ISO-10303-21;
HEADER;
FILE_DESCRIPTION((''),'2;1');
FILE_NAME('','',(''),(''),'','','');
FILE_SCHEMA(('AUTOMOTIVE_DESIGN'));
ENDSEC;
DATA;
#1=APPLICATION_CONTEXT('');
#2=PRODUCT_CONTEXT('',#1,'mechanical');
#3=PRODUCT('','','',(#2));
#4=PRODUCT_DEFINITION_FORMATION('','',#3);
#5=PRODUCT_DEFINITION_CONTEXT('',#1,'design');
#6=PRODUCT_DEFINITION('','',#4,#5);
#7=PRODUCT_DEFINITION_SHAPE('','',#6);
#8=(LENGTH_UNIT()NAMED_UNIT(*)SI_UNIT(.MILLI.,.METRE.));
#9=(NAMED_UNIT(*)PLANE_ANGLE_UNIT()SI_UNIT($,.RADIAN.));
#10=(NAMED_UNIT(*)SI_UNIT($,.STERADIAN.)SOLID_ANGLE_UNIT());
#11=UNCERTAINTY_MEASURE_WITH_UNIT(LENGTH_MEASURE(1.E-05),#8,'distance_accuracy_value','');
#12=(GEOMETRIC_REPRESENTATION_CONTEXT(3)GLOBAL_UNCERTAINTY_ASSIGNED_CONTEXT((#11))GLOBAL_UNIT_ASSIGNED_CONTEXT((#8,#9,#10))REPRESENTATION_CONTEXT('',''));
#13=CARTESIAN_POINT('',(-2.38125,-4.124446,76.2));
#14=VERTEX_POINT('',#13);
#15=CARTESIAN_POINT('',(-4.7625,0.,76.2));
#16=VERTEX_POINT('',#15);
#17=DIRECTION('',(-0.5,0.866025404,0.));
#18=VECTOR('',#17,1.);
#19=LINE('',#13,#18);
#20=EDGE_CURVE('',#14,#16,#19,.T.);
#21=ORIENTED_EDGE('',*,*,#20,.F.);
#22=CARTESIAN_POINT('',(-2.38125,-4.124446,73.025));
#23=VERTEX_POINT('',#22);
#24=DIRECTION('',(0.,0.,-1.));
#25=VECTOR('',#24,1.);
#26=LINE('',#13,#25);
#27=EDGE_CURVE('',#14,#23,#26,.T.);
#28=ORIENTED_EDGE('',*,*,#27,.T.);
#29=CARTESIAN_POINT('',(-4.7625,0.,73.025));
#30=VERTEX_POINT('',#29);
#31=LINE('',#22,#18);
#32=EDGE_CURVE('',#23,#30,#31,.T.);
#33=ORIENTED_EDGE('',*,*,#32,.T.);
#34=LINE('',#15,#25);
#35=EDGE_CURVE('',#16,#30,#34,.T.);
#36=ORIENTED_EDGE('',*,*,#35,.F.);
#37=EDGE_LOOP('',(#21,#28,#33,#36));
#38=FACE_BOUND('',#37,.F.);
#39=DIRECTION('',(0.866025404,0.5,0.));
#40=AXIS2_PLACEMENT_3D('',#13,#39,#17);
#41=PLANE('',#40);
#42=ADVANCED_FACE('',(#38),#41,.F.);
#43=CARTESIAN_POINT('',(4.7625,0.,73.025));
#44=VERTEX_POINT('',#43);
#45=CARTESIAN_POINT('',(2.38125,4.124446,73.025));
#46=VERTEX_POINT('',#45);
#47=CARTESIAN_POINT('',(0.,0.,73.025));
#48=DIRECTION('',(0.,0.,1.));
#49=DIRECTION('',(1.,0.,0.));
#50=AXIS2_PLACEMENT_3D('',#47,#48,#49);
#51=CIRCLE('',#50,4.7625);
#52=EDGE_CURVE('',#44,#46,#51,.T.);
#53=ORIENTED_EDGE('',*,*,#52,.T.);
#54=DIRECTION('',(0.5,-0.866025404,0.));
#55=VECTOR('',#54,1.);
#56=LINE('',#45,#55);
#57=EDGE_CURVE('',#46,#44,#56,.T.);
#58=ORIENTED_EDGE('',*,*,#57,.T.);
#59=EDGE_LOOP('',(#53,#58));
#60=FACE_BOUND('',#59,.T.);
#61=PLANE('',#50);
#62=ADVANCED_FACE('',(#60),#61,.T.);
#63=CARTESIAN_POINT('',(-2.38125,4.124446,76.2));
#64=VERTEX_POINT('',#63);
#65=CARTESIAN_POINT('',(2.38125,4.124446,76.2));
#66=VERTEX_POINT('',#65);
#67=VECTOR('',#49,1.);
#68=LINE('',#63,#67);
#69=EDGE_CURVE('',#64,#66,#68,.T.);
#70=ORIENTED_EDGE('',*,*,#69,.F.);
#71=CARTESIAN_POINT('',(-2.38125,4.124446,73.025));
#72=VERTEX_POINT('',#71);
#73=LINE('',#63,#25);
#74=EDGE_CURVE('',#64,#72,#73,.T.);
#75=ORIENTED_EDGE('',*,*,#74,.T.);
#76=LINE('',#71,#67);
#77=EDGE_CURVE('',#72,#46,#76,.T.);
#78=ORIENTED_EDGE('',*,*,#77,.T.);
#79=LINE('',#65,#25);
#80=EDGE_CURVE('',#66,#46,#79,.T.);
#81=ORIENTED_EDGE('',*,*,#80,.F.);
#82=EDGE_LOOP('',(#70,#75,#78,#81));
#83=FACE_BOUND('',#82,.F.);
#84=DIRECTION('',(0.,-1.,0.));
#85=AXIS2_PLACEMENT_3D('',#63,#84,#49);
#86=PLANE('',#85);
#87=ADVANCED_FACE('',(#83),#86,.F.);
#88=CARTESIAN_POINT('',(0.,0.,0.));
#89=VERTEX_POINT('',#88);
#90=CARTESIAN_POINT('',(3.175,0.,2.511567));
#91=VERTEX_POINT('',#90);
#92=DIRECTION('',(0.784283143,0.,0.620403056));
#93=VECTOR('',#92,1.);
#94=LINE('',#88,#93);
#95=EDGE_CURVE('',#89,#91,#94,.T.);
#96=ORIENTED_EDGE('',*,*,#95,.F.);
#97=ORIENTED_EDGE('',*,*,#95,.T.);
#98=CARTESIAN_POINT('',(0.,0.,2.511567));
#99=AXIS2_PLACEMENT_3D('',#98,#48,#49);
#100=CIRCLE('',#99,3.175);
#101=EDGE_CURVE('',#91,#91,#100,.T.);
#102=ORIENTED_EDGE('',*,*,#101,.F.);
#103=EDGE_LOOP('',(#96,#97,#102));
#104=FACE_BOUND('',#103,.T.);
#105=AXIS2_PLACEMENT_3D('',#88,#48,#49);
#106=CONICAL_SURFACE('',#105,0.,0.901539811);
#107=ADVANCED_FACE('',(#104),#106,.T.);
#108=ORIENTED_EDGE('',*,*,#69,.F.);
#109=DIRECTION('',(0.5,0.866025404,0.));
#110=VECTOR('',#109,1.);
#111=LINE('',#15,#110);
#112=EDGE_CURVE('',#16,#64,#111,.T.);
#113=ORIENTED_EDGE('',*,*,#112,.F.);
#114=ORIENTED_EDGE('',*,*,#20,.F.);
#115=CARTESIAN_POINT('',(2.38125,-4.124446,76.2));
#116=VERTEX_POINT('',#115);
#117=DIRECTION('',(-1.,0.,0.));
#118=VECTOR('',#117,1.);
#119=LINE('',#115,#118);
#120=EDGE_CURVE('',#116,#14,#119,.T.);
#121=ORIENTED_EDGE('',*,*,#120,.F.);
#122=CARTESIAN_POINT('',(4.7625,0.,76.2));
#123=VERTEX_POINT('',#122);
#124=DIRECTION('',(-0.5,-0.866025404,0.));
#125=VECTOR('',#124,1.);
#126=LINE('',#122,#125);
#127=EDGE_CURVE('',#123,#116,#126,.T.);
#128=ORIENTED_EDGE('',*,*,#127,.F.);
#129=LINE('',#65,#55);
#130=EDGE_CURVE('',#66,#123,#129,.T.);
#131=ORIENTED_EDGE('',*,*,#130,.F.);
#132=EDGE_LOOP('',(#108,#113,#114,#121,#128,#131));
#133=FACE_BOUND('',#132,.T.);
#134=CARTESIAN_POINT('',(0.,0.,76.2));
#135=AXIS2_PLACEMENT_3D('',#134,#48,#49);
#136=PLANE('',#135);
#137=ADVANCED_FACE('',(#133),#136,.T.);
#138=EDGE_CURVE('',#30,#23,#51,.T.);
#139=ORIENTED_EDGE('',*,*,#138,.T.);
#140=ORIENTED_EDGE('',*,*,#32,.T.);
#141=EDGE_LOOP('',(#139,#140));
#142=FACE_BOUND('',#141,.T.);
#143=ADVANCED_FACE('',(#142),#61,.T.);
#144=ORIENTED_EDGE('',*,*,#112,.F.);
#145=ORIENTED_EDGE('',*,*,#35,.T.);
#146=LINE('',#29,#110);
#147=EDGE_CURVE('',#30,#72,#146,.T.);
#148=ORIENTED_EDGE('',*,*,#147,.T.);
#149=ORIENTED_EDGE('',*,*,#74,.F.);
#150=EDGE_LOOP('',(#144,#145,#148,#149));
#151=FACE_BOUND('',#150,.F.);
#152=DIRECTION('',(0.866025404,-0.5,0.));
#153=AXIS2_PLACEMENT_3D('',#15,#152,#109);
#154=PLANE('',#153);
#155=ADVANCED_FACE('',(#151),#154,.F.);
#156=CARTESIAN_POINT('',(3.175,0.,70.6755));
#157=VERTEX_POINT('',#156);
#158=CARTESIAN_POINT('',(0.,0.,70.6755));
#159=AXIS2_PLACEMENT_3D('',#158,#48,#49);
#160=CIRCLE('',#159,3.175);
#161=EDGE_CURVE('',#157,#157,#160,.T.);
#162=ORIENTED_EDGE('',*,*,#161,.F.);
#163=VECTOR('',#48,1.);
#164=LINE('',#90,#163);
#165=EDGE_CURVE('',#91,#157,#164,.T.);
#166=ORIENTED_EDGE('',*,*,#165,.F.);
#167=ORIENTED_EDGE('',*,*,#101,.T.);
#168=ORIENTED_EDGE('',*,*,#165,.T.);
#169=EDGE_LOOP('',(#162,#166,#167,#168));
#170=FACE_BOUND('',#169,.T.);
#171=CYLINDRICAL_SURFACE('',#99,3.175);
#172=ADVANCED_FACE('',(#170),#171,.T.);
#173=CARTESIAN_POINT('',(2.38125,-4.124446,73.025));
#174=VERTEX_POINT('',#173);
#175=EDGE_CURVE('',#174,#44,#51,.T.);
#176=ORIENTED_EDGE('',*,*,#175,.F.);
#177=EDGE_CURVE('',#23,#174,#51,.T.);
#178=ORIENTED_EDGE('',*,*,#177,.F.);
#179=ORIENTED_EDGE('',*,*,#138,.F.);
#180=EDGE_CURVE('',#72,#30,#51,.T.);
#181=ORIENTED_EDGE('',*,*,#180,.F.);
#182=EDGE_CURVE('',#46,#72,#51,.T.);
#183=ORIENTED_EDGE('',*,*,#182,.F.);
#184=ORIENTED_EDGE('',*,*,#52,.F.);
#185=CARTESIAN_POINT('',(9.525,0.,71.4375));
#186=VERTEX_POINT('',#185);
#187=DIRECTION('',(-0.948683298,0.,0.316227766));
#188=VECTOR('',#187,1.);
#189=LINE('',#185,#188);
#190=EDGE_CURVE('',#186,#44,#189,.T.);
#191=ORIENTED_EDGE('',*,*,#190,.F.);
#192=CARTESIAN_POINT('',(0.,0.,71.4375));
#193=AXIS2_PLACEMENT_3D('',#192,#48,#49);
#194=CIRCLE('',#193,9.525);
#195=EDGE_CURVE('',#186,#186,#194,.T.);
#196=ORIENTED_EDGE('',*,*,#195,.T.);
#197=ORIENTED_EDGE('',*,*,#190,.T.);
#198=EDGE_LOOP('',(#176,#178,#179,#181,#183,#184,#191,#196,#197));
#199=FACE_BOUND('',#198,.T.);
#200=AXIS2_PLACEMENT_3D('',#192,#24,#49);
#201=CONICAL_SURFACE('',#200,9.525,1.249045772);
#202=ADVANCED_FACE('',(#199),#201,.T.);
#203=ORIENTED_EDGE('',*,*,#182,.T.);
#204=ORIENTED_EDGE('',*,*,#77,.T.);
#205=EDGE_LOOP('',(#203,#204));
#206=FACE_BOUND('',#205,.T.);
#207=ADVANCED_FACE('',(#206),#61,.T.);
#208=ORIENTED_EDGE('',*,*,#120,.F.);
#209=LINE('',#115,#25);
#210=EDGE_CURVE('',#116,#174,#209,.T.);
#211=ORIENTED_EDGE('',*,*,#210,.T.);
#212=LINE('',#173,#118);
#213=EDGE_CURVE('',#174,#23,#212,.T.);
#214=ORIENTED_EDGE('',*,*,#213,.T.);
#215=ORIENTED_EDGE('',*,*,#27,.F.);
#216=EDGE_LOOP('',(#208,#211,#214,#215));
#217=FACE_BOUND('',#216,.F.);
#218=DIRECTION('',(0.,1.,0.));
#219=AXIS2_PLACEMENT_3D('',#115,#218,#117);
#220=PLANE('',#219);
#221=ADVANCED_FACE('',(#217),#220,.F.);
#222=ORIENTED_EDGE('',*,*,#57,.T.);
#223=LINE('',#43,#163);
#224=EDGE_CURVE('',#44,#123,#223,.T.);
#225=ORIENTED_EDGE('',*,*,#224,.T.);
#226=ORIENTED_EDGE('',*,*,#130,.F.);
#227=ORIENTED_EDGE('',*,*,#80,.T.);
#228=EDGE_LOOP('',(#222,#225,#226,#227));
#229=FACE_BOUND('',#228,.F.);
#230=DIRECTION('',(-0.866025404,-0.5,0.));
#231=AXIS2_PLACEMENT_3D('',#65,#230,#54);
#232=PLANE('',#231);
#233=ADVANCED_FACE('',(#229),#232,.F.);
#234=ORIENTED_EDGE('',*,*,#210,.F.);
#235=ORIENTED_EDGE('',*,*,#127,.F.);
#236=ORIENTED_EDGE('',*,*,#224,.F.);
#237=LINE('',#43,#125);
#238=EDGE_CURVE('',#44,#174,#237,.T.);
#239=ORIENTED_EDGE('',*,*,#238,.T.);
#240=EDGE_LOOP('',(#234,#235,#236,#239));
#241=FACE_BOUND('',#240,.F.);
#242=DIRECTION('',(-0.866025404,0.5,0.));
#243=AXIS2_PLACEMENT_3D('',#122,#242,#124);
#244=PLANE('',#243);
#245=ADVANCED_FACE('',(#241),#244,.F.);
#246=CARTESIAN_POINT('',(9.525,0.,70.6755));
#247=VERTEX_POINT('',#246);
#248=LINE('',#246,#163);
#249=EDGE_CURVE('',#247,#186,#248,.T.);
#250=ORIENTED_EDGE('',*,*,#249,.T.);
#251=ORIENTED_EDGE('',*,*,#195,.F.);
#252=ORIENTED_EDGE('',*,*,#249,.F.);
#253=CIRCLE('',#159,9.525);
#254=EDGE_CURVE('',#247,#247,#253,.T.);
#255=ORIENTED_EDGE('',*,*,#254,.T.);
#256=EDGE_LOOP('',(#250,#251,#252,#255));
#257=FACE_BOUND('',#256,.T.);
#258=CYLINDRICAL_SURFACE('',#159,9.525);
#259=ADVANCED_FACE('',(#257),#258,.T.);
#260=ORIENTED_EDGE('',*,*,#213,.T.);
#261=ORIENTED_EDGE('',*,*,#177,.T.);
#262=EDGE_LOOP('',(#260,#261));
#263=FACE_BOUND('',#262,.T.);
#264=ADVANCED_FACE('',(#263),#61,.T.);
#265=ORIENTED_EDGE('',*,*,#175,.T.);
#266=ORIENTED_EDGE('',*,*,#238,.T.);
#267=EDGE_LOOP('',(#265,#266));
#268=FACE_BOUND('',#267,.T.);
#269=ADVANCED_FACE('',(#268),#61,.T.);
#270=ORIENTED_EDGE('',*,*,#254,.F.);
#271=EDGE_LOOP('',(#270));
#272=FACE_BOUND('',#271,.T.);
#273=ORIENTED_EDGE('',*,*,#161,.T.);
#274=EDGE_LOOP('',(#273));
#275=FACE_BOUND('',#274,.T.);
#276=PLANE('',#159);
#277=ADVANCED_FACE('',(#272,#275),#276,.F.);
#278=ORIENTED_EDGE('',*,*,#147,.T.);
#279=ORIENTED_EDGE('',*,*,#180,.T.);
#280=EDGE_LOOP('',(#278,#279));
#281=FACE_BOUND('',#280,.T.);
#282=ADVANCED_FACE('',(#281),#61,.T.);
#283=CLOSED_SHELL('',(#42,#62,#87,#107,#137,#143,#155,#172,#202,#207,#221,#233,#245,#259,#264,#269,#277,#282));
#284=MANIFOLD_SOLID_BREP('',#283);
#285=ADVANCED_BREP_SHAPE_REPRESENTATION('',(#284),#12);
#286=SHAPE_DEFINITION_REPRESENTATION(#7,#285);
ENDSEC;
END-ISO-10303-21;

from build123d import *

# Parameters (mm, degrees)
F2_R     = 10.2989039919
F3_DEPTH = 3.175


# Not quite as in the source:
# - a length typed as a fraction of an inch, garbled in the dataset ("3 / 203.2 mm" for 3/8 in), is restored


with BuildPart() as f1:
    # F0 (on Front) → F1 (revolve)
    with BuildSketch(Plane.XZ):
        Polygon((0, 76.2), (0, 0), (3.175, 2.5115670547), (3.175, 70.6755), (9.525, 70.6755), (9.525, 71.4375), (4.7625, 73.025), (4.7625, 76.2), align=None)
    revolve(axis=Axis((0, 0, 38.1), (0, 0, 1)))

    # F2 (on face) → F3 (cut)
    with BuildSketch(Plane.XY.offset(76.2)):
        Circle(F2_R)
        Polygon((-4.7625, 0), (-2.38125, 4.1244459855), (2.38125, 4.1244459855), (4.7625, 0), (2.38125, -4.1244459855), (-2.38125, -4.1244459855), align=None, mode=Mode.SUBTRACT)
    extrude(amount=-F3_DEPTH, mode=Mode.SUBTRACT)


solid = f1.part
